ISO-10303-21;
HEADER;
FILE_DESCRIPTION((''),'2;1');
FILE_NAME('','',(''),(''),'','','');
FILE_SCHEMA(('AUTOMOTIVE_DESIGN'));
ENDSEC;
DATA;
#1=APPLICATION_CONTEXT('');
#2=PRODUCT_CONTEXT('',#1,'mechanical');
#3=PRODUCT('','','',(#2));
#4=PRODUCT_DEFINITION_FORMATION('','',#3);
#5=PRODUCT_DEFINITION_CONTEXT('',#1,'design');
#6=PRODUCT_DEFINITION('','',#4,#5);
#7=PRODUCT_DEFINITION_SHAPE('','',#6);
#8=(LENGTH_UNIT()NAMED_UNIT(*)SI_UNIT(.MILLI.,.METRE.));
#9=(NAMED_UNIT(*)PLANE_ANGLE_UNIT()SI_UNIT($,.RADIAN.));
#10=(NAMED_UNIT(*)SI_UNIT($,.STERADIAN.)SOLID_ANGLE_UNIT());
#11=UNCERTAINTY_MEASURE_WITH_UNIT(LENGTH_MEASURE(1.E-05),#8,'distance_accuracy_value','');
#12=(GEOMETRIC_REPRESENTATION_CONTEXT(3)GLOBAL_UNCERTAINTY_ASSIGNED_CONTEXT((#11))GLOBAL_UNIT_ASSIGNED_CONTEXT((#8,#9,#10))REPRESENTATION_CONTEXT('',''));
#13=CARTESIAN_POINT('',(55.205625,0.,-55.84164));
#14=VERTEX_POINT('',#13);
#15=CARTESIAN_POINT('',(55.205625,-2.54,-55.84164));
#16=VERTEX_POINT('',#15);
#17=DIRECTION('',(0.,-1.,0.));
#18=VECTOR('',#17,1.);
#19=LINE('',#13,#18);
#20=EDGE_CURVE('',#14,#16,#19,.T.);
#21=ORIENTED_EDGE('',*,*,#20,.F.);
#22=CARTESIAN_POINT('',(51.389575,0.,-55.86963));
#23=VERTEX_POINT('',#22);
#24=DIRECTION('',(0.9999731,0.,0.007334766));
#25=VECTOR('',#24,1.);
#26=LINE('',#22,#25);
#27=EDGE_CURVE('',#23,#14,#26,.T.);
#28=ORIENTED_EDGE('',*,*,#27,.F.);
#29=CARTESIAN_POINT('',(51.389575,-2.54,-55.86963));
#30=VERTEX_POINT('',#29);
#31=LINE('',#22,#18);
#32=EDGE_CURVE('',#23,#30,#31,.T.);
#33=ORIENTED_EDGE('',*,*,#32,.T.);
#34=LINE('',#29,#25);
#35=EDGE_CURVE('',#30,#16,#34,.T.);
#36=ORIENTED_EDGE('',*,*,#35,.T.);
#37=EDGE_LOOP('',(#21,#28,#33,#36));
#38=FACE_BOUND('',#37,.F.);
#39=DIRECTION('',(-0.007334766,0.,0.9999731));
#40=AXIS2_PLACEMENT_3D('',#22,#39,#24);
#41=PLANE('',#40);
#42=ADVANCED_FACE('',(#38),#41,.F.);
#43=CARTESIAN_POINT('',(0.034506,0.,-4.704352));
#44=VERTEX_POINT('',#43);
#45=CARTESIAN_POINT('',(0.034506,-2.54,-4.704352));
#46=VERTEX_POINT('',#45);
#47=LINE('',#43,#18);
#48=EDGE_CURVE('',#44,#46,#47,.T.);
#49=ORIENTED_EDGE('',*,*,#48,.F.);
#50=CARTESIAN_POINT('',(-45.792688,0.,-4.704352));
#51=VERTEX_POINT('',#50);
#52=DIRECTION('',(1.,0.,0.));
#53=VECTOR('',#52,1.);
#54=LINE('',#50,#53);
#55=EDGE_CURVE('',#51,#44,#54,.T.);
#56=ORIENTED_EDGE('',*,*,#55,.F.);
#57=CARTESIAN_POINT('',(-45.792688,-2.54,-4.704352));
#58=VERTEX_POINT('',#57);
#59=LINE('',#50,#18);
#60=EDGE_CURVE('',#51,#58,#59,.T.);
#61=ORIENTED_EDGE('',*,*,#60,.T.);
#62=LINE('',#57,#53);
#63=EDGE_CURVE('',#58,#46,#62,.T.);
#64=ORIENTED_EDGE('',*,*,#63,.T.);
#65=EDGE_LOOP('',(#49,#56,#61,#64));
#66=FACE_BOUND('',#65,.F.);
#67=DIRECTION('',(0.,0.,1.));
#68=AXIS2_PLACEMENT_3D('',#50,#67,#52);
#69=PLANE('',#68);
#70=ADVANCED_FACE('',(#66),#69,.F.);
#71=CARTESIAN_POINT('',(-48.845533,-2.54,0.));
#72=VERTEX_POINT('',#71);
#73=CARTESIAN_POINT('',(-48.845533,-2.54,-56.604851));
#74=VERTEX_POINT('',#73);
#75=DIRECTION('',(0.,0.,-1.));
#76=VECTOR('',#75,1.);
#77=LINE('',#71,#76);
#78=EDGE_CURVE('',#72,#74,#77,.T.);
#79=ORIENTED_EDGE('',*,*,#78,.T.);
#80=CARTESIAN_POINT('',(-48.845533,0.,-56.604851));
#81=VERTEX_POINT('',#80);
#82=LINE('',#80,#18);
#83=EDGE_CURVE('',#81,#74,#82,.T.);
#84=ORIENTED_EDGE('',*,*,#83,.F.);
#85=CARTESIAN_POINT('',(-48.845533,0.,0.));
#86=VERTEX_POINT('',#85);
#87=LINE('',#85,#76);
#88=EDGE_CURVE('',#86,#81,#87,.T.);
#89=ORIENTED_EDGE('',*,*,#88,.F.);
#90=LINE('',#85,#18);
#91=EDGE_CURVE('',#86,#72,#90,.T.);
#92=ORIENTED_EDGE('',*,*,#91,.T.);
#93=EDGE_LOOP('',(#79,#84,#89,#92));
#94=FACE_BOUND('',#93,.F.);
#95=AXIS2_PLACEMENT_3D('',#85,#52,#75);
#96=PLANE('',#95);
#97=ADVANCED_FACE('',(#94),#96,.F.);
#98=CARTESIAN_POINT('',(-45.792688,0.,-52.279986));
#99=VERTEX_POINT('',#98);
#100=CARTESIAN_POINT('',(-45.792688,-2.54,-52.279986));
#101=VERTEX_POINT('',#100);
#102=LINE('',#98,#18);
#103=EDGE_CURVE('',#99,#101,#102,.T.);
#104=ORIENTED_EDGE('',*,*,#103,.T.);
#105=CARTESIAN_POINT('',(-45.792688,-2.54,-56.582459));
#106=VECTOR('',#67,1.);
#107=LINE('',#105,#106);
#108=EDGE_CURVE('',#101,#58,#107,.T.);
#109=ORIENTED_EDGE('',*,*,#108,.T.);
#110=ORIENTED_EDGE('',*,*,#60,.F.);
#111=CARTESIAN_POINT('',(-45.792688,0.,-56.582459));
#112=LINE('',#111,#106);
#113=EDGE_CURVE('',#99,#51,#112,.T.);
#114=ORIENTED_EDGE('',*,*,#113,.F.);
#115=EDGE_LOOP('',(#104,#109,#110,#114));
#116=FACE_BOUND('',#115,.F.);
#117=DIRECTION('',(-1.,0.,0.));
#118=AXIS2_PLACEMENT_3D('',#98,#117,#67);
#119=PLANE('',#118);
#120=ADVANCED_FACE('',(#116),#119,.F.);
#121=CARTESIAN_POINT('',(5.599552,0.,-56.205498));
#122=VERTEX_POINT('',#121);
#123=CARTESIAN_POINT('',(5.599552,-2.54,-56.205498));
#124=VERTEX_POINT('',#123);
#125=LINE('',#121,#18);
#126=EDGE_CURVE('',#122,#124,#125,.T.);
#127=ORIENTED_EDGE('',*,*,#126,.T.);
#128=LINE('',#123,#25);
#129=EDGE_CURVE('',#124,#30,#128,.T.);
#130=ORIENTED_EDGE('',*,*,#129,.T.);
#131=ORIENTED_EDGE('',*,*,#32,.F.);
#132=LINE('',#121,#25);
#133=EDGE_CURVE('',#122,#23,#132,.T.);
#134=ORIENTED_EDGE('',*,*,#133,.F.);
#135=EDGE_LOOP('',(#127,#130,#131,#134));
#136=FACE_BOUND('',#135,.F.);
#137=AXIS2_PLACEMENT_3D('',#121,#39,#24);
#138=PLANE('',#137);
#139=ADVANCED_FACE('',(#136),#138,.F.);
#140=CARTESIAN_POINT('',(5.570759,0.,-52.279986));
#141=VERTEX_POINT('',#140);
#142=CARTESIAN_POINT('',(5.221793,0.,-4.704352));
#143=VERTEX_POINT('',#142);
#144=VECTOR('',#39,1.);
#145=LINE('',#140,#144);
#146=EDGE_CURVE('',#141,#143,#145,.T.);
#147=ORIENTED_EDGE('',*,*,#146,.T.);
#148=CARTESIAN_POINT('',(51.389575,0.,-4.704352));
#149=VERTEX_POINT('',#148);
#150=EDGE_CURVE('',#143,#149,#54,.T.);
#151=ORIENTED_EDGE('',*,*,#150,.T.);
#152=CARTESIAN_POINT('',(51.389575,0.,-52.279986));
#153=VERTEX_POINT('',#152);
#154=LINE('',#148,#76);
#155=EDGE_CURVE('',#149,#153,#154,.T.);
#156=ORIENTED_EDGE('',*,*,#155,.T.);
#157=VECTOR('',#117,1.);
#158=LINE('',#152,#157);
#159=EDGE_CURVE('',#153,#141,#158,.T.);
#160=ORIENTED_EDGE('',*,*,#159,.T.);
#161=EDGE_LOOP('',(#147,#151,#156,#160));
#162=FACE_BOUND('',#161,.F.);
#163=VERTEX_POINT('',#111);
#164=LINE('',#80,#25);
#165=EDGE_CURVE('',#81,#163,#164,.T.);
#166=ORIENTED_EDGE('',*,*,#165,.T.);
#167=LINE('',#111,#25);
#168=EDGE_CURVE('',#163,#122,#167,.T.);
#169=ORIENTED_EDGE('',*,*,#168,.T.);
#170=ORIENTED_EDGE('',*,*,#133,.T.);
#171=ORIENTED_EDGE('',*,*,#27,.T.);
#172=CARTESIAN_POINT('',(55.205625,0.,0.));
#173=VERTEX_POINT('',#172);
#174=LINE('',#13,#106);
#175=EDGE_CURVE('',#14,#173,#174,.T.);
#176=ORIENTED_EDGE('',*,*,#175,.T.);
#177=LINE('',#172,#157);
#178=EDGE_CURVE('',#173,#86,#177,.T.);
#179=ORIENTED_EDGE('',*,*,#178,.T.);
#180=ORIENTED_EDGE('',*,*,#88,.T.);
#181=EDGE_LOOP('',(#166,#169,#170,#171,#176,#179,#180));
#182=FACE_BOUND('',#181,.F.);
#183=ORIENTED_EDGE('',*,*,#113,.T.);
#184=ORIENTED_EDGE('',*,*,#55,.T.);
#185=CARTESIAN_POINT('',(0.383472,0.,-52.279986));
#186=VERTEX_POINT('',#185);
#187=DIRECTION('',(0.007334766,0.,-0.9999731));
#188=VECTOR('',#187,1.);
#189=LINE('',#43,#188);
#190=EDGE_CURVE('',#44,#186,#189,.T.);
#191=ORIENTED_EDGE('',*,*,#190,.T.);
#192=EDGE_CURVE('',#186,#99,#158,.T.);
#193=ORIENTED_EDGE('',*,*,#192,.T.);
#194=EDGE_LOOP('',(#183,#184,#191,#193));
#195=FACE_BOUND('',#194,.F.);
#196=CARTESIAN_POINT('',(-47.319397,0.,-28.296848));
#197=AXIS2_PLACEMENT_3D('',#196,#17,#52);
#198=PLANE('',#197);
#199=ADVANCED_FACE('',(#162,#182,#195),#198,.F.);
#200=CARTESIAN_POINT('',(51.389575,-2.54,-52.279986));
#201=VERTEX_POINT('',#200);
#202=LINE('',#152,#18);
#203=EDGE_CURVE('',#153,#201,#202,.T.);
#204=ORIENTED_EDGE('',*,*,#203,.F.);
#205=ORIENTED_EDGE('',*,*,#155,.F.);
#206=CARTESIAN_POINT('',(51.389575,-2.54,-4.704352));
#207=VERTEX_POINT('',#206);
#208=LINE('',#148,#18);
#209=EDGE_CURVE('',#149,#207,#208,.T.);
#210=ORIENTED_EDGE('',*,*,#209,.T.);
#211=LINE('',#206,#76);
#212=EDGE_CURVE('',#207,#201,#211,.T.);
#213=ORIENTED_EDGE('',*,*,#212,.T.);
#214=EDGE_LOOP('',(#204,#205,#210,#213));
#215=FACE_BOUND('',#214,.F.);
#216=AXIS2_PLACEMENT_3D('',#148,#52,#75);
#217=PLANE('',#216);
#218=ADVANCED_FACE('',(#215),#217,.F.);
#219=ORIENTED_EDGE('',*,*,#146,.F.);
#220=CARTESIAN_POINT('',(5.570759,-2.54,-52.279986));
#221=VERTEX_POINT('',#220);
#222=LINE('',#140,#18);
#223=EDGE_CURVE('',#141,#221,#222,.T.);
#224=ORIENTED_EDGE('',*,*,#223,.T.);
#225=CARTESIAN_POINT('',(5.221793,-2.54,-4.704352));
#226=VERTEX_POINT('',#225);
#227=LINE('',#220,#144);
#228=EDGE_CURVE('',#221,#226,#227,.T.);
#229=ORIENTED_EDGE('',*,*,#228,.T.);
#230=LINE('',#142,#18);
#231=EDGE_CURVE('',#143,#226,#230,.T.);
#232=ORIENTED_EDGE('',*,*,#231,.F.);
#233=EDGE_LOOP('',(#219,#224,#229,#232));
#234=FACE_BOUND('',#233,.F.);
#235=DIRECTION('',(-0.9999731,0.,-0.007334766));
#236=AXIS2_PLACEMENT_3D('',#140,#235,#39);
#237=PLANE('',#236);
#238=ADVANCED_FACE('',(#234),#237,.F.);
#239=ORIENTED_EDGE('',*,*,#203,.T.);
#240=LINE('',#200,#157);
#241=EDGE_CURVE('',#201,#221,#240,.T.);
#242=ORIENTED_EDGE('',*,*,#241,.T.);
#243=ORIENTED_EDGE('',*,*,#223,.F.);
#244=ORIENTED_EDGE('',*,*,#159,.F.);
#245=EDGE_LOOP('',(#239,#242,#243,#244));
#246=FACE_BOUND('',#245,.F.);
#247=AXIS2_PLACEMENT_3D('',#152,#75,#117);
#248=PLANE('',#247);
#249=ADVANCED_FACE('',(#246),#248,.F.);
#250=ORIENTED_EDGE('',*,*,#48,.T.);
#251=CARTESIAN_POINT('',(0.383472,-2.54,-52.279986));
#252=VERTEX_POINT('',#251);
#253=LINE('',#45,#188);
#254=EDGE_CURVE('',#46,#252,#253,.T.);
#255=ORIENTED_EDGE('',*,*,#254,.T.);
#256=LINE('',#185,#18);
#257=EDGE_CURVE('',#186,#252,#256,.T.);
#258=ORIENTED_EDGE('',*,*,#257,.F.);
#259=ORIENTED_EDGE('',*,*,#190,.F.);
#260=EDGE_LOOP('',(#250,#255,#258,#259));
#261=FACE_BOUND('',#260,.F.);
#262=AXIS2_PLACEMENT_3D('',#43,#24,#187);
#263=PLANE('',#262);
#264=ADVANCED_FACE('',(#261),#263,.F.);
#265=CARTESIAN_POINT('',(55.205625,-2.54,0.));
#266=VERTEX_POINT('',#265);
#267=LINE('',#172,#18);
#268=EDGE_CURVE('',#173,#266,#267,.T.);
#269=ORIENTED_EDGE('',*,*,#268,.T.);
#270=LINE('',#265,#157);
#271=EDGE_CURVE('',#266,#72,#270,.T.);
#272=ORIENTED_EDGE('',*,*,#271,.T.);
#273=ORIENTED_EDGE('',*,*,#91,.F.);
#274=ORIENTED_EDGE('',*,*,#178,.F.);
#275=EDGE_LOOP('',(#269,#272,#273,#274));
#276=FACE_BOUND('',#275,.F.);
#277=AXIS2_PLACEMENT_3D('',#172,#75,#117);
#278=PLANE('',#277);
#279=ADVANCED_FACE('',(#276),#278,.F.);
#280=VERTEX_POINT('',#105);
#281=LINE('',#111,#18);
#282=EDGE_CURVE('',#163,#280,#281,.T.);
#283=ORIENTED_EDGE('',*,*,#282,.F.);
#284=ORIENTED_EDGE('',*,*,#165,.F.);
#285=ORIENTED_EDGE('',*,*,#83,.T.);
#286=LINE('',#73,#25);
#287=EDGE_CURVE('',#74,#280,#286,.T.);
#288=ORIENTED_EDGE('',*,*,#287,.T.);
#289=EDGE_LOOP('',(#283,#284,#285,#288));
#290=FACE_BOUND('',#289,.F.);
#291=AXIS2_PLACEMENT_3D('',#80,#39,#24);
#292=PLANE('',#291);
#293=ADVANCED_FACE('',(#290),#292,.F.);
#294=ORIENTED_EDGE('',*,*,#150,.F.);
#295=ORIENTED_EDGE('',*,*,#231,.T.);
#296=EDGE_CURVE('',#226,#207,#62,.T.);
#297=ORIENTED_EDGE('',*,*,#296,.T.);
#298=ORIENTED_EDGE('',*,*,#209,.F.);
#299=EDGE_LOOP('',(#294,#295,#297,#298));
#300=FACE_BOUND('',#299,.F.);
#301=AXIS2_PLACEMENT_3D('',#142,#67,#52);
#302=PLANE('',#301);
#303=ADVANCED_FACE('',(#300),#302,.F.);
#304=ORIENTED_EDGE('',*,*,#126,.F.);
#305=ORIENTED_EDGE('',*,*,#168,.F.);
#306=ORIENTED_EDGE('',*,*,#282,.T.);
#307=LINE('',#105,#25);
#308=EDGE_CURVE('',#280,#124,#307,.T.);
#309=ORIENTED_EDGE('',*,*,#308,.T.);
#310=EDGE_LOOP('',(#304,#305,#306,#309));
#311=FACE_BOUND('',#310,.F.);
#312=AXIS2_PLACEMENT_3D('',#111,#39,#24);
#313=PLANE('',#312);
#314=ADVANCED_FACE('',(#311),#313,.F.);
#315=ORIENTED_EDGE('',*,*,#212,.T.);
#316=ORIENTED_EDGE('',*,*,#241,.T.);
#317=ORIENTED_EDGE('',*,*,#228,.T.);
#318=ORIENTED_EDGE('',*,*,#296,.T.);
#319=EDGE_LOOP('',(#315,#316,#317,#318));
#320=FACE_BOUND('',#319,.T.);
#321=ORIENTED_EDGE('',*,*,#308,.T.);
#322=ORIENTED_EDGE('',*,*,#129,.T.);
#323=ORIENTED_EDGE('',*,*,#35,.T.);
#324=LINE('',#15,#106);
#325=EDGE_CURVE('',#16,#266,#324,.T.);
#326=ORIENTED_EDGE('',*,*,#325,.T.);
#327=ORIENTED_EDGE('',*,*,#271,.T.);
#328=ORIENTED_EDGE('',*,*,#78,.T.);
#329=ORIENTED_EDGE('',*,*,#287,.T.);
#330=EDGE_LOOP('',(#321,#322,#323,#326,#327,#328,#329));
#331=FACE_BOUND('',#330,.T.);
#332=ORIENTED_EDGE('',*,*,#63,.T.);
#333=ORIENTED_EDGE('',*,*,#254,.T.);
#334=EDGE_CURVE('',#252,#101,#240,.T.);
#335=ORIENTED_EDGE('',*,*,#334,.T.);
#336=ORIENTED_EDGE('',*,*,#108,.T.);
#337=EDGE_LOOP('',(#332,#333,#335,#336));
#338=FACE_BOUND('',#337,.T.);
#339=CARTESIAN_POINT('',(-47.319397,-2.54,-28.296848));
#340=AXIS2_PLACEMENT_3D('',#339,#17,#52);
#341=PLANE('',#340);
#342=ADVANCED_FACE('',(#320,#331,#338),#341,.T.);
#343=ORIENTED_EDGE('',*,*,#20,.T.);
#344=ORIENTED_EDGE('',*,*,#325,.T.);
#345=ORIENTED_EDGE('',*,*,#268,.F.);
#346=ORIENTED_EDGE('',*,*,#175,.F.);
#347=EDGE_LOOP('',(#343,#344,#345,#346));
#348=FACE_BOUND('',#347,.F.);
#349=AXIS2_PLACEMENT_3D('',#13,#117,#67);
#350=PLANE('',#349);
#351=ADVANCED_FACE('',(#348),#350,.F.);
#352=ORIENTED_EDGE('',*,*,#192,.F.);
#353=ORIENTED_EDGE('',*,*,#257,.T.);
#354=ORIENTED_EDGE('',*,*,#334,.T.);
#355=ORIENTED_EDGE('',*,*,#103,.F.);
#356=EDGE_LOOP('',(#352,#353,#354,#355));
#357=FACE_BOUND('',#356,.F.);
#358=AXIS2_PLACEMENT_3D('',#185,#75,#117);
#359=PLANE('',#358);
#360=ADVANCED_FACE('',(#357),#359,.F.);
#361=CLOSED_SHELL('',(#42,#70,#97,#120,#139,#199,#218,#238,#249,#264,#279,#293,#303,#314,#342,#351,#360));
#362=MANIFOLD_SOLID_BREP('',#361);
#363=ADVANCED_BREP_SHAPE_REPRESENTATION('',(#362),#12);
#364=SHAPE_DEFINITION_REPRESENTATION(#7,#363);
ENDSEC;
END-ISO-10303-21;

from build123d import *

# Parameters (mm, degrees)
F1_DEPTH = 2.54


# Not quite as in the source:
# - a feature names something its author has since deleted; it is built from what else it names


with BuildPart() as f1:
    # F0 (on Front) → F1 (new body)
    with BuildSketch(Plane.XZ):
        Polygon((-45.7926876843, 0), (-48.8455332816, 0), (-48.8455332816, -56.6048510373), (-45.7926876843, -56.5824585276), (-45.7926876843, -52.2799864411), (-45.7926876843, -32.4403391187), (-45.7926876843, -28.3024255186), (-45.7926876843, -4.7043516129), align=None)
        Polygon((0, 0), (-45.7926876843, 0), (-45.7926876843, -4.7043516129), (0.0345062453, -4.7043516129), align=None)
        Polygon((-45.7926876843, -52.2799864411), (-45.7926876843, -56.5824585276), (5.5995524852, -56.2054983442), (5.5707590003, -52.2799864411), (0.3834717695, -52.2799864411), align=None)
        Polygon((5.1872872309, 0), (0, 0), (0.0345062453, -4.7043516129), (5.2217934762, -4.7043516129), align=None)
        Polygon((5.5707590003, -52.2799864411), (5.5995524852, -56.2054983442), (51.3895750046, -55.8696302204), (51.3895750046, -52.2799864411), align=None)
        Polygon((51.3895750046, 0), (5.1872872309, 0), (5.2217934762, -4.7043516129), (51.3895750046, -4.7043516129), align=None)
        Polygon((51.3895750046, -52.2799864411), (51.3895750046, -55.8696302204), (55.2056245506, -55.8416396379), (55.2056245506, 0), (51.3895750046, 0), (51.3895750046, -4.7043516129), (51.3895750046, -28.3024255186), align=None)
        Polygon((5.2217934762, -4.7043516129), (0.0345062453, -4.7043516129), (0.2379486892, -32.4403391187), (0.3834717695, -52.2799864411), (5.5707590003, -52.2799864411), align=None)
    extrude(amount=F1_DEPTH)


solid = f1.part
